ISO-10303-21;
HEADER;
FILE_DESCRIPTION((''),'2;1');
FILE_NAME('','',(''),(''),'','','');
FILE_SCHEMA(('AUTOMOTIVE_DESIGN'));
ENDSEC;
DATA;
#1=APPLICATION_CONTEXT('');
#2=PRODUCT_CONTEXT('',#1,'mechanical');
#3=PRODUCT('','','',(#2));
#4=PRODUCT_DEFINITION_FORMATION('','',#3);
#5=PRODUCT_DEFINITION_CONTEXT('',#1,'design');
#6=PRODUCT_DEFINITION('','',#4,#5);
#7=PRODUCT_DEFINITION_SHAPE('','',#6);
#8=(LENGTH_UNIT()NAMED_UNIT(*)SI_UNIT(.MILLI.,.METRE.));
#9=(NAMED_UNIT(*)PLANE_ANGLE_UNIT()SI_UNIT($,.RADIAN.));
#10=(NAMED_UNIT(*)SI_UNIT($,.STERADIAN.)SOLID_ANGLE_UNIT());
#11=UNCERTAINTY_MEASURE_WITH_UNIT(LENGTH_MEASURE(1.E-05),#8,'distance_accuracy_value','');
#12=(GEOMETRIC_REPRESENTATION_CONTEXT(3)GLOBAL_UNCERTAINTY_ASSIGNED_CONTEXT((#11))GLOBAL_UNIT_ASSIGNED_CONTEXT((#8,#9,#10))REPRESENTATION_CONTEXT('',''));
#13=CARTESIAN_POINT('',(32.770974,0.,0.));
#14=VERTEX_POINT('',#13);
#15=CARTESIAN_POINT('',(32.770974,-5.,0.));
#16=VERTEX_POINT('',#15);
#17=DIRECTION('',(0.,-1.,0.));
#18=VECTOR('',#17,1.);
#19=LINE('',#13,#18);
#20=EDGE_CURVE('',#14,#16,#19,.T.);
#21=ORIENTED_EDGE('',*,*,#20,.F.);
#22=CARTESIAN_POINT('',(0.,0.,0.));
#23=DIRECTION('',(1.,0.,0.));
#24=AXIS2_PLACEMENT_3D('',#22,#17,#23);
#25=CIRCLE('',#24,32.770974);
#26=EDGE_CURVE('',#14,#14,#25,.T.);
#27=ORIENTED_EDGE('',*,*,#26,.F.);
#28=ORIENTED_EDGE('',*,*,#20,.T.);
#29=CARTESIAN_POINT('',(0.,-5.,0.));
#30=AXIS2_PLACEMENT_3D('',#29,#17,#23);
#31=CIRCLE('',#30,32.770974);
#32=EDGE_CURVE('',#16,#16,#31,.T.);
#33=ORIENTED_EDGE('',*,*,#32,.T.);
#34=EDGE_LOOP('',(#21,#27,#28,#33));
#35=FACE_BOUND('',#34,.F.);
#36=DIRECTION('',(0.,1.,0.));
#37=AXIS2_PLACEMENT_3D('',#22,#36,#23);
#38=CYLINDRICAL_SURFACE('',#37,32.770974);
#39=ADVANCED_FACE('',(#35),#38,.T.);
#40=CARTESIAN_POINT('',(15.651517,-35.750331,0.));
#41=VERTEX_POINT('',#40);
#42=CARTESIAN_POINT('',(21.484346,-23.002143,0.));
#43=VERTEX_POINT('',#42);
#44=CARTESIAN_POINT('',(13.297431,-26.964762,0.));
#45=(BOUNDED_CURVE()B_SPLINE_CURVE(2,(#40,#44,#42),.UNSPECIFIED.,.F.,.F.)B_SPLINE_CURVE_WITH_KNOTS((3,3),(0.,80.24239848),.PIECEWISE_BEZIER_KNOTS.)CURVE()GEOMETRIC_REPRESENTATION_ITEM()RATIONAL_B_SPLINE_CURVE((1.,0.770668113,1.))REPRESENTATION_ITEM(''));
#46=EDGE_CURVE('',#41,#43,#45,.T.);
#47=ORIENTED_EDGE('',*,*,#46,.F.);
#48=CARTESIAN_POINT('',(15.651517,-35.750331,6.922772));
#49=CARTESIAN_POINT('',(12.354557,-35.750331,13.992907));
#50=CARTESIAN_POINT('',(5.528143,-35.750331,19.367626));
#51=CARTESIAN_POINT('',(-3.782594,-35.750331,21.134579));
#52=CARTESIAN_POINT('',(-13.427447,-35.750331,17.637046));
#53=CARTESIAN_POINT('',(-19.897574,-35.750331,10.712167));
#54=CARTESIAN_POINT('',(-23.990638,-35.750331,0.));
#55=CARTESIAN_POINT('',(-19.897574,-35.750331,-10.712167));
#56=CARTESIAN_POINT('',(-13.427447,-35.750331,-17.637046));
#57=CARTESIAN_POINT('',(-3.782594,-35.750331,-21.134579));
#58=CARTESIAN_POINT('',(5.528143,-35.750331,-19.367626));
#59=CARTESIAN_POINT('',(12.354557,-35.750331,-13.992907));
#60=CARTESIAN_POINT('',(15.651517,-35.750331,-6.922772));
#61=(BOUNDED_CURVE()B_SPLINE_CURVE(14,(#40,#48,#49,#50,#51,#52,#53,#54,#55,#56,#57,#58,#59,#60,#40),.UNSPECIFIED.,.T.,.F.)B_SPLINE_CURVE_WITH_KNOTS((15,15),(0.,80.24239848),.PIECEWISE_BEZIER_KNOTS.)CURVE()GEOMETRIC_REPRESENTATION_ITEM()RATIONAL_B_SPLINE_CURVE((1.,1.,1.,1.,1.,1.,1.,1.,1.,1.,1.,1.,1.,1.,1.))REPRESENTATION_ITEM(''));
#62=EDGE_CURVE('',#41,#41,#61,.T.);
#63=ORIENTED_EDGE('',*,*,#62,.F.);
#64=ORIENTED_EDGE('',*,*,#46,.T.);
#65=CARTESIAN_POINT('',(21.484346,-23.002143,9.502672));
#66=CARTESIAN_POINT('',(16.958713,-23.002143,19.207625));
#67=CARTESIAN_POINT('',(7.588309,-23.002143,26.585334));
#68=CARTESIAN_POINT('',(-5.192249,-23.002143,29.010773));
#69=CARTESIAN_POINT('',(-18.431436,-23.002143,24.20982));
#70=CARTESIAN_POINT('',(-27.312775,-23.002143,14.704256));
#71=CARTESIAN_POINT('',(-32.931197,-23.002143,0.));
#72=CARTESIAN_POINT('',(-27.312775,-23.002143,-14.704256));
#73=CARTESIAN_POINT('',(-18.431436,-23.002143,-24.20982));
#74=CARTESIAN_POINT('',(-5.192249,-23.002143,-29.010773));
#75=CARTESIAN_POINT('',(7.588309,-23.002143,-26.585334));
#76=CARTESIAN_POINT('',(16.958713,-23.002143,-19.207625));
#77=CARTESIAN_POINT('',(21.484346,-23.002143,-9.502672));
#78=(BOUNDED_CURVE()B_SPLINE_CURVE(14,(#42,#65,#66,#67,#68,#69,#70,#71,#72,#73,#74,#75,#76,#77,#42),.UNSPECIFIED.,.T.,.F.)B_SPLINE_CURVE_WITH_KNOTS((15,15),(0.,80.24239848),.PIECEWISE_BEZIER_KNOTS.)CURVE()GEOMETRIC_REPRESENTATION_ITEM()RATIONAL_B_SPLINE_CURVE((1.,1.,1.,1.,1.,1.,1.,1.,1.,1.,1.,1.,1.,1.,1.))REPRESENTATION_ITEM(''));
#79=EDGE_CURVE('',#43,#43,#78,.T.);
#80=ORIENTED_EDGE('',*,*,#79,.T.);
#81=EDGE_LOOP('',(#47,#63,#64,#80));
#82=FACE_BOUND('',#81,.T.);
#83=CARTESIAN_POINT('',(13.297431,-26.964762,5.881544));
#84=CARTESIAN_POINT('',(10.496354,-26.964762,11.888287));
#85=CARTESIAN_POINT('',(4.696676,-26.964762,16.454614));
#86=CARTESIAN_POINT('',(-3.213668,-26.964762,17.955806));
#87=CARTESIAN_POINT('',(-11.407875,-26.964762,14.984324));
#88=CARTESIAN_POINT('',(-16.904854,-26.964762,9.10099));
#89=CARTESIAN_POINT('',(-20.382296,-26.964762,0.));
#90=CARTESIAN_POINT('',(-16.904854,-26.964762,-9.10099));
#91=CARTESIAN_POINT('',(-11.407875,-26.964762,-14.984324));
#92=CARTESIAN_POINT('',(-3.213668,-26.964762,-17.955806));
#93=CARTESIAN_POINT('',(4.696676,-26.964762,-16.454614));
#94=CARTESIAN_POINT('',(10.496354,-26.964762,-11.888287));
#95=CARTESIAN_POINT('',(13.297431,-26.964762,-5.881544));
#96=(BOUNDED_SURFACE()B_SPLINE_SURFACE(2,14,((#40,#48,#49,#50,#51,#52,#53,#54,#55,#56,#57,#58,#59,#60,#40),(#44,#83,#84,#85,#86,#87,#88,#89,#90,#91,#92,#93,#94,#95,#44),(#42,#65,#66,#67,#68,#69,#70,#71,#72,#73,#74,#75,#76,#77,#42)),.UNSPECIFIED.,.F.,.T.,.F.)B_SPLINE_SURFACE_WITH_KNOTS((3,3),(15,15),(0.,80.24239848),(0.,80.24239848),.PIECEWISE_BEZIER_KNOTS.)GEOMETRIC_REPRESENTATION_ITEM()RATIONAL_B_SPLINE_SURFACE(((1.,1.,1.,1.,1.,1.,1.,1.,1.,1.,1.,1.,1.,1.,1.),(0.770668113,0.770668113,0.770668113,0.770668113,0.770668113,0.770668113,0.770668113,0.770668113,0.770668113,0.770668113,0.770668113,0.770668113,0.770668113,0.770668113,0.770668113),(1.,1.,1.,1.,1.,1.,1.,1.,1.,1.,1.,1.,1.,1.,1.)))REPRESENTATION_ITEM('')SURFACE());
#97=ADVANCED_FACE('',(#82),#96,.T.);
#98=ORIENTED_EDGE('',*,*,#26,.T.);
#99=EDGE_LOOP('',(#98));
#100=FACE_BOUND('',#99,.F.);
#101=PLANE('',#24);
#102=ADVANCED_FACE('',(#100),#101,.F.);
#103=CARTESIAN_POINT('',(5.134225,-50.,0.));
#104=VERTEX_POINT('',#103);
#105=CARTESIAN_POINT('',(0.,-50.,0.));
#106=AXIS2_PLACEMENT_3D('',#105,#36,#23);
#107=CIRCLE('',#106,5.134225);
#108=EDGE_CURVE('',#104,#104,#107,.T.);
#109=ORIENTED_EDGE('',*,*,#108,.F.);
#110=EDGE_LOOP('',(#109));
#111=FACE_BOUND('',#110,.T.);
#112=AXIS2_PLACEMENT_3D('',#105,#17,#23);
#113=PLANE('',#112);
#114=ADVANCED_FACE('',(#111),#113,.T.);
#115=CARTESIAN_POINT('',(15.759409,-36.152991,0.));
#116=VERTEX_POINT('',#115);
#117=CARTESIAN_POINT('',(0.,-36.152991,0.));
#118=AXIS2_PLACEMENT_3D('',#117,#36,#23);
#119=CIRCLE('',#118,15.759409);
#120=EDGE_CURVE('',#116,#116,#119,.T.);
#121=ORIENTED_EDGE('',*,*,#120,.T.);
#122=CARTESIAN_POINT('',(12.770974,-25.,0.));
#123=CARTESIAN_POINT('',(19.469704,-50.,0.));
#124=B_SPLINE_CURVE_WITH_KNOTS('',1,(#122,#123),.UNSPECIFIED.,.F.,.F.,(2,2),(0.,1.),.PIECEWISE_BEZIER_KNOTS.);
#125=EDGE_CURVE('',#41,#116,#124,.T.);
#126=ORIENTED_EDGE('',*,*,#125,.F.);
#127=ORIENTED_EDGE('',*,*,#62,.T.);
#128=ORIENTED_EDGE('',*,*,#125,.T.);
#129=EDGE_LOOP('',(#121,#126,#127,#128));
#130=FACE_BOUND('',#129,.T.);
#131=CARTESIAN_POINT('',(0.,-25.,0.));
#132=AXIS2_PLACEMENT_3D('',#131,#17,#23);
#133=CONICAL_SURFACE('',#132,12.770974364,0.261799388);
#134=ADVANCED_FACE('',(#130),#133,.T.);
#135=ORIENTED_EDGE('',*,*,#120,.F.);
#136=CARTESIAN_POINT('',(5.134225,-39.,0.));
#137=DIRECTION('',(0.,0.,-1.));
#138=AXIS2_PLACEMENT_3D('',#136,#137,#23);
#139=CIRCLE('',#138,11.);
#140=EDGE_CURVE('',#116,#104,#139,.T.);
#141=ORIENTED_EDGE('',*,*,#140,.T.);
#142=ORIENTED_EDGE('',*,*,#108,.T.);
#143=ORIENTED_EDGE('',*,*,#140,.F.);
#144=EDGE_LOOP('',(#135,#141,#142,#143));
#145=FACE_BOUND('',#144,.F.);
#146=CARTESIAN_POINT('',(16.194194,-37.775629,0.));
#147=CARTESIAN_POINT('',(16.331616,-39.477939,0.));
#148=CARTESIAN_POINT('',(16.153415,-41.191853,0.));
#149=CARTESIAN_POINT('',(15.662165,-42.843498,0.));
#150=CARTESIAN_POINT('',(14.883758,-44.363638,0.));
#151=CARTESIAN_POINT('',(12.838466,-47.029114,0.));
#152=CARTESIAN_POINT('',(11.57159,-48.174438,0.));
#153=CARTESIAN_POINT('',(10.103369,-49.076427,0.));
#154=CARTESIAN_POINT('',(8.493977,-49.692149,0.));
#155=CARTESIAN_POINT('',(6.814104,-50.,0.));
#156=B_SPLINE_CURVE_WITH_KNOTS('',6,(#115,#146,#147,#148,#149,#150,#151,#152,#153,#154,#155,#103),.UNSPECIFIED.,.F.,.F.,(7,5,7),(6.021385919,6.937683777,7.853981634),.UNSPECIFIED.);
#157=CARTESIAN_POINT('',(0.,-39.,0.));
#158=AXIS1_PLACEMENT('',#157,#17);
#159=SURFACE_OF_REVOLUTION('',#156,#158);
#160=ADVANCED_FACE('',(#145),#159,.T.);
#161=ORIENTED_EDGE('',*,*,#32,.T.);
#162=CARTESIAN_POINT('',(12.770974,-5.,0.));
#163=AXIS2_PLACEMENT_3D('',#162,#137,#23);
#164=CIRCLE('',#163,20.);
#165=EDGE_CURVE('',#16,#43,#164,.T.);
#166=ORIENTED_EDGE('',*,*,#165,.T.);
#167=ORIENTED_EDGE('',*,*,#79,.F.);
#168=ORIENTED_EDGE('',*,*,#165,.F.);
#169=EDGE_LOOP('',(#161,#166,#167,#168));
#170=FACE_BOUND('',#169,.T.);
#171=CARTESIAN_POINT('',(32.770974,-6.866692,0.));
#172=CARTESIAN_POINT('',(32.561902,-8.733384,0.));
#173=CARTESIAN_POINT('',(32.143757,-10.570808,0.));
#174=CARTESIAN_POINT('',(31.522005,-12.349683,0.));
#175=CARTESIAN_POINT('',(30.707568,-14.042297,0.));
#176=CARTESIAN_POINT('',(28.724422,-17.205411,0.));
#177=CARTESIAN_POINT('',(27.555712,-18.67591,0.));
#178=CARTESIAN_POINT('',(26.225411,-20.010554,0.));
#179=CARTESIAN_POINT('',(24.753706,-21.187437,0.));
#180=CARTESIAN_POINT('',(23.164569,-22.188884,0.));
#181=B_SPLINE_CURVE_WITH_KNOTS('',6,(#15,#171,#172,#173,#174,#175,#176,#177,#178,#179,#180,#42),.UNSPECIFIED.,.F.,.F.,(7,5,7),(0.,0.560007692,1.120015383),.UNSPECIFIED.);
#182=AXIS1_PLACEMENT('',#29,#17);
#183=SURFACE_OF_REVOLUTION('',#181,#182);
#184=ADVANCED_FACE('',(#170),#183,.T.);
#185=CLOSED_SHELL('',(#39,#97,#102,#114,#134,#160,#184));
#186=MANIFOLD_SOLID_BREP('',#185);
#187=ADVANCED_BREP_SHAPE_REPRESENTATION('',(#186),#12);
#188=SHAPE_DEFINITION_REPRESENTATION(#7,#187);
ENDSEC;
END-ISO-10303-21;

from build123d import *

# Parameters (mm, degrees)
F0_R      = 32.7709743637
F1_DEPTH  = 25
F2_R      = 20
F1_FACE_R = 12.7709743637
F3_DEPTH  = 25
F3_TAPER  = -15
F4_R      = 11


with BuildPart() as f1:
    # F0 (on Front) → F1 (new body)
    with BuildSketch(Plane.XZ):
        Circle(F0_R)
    extrude(amount=F1_DEPTH)

    # F2
    f2_edges = [f1.edges().sort_by_distance(p)[0] for p in [
        (-32.770974, -25, 0),
    ]]
    fillet(f2_edges, radius=F2_R)

    # F1_face (on face) → F3 (join)
    with BuildSketch(Plane.XZ.offset(25)):
        Circle(F1_FACE_R)
    extrude(amount=F3_DEPTH, taper=F3_TAPER)

    # F4
    f4_edges = [f1.edges().sort_by_distance(p)[0] for p in [
        (-19.469704, -50, 0),
        (-12.770974, -25, 0),
    ]]
    fillet(f4_edges, radius=F4_R)


solid = f1.part
